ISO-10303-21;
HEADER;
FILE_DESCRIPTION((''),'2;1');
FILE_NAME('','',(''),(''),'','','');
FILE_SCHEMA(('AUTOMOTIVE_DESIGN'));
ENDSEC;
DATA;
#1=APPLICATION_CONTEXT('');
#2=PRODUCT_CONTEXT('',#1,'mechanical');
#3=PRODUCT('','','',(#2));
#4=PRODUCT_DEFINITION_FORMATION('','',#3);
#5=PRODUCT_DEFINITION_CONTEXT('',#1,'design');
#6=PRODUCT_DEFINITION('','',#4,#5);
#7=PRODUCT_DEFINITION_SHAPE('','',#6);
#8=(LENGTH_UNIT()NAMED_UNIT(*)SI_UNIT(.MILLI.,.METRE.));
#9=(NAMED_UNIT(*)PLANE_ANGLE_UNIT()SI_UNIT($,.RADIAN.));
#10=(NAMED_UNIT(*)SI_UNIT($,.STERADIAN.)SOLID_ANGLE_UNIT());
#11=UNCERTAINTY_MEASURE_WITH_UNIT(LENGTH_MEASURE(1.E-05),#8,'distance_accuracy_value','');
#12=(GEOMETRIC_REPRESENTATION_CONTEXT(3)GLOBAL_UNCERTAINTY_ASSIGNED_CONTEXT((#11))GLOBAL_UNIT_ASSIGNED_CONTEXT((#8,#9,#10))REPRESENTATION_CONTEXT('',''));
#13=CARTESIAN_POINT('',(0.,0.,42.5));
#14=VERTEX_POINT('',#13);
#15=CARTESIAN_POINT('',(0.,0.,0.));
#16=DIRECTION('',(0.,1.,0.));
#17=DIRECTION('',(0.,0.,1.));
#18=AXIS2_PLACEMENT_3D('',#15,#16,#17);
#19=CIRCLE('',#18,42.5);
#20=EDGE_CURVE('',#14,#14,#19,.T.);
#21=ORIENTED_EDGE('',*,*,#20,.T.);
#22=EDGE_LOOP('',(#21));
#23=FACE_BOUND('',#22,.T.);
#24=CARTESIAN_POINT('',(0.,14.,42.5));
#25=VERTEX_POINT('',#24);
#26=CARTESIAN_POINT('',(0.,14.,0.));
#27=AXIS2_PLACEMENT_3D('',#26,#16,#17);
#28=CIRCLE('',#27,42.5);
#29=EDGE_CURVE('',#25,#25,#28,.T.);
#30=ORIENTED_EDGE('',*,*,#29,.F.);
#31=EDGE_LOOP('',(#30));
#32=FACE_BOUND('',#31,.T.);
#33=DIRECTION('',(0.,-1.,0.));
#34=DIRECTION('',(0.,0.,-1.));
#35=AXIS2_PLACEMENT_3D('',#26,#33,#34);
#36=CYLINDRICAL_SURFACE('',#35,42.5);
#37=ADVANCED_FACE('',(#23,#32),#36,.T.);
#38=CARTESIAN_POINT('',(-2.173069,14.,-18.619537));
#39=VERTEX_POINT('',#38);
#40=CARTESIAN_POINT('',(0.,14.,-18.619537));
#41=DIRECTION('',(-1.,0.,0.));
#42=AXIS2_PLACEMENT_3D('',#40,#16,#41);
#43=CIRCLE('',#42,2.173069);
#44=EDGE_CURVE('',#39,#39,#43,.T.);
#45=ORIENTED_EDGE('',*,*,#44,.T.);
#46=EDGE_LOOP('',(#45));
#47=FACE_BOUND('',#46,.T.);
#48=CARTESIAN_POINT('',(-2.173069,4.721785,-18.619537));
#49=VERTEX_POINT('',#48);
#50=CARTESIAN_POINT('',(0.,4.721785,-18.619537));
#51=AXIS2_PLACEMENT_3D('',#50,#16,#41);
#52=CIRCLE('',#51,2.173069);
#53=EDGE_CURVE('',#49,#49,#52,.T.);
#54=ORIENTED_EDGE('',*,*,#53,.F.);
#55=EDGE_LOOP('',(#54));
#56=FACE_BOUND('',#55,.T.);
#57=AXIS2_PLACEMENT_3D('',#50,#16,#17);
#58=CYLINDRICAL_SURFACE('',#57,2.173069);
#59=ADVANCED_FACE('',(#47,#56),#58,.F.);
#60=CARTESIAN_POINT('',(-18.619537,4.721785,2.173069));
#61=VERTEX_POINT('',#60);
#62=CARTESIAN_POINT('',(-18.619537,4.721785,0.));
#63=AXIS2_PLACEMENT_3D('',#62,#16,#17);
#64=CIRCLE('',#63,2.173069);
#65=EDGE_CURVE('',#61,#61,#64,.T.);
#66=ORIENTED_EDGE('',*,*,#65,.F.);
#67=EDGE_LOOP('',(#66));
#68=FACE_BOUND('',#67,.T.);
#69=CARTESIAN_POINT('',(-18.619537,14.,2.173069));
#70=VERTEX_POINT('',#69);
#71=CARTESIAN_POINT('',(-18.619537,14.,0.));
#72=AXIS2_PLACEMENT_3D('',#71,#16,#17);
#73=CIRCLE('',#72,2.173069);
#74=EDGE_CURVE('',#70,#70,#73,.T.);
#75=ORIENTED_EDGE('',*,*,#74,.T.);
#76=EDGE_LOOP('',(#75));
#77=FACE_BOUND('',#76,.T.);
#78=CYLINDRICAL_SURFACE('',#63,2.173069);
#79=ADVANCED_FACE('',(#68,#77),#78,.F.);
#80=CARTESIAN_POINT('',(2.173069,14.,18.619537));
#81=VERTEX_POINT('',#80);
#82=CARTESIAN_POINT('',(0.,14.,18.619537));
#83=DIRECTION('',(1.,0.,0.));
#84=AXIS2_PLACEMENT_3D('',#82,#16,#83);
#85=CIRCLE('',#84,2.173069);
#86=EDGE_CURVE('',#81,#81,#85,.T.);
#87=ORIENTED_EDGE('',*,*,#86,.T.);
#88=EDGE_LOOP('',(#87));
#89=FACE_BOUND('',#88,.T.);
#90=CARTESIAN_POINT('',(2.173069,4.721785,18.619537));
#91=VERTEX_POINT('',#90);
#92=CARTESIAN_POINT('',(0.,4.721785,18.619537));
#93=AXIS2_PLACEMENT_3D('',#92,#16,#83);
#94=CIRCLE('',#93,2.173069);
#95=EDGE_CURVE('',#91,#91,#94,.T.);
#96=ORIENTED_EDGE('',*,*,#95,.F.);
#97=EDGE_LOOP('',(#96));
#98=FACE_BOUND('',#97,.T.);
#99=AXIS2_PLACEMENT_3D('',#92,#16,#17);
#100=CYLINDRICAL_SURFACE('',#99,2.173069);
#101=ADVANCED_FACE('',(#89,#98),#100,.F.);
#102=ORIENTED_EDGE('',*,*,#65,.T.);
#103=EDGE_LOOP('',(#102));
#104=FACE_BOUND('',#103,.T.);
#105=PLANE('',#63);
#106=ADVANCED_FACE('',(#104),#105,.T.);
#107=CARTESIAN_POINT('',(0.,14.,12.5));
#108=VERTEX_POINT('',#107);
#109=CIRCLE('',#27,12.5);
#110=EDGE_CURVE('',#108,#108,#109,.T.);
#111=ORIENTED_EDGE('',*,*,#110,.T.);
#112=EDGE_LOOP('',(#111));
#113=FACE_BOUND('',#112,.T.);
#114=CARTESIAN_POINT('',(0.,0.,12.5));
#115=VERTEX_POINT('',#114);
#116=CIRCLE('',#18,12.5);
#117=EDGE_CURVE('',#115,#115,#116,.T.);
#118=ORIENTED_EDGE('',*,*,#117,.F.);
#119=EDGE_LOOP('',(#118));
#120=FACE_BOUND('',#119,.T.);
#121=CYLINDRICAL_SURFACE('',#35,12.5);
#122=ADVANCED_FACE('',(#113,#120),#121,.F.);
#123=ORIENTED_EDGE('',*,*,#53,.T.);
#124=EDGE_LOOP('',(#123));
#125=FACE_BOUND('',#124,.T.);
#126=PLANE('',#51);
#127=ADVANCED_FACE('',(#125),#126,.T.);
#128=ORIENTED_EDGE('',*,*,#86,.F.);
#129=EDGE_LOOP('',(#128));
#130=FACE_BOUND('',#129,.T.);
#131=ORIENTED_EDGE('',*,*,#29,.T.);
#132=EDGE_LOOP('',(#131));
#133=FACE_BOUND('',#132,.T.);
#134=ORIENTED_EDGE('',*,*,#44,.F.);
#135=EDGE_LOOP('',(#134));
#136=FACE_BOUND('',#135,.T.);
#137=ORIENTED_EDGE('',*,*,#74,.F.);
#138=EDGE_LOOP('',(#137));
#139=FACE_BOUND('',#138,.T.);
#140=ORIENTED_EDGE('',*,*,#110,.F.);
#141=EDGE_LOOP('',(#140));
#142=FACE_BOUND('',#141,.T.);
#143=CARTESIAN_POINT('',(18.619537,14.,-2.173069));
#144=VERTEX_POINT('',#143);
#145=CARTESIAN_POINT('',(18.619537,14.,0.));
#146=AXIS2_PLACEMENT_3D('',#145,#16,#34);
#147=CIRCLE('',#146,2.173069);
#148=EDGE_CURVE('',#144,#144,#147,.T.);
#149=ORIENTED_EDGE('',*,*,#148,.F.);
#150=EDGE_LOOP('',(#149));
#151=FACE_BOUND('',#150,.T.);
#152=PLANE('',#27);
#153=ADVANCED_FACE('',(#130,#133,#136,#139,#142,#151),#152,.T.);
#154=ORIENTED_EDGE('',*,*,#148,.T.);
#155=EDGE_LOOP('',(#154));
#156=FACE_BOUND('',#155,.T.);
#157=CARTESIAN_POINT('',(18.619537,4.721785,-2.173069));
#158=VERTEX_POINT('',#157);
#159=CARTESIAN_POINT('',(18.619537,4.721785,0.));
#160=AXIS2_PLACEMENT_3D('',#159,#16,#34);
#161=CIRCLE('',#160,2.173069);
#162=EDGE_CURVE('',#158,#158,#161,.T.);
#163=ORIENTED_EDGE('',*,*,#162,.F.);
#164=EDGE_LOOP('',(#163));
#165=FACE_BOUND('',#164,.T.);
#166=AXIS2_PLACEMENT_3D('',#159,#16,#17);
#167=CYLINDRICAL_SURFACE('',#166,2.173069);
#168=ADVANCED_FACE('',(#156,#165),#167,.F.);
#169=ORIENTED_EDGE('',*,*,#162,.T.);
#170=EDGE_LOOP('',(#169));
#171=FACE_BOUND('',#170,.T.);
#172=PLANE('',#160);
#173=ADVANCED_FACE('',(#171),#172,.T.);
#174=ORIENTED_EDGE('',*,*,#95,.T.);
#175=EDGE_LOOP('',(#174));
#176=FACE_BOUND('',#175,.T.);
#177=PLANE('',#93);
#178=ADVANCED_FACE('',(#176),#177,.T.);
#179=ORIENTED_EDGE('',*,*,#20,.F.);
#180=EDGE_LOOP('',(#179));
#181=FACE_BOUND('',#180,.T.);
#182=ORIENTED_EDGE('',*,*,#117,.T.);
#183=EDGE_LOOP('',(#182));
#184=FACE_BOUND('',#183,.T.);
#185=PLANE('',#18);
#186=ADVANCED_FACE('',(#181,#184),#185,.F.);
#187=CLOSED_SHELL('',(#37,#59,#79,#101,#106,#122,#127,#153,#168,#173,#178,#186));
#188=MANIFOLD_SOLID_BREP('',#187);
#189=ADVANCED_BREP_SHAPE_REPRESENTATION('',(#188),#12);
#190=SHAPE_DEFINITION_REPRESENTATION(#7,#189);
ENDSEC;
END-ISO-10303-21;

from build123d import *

# Parameters (mm, degrees)
SKETCH1_R           = 42.5
BOSS_EXTRUDE1_DEPTH = 14
SKETCH2_R           = 12.5
CUT_EXTRUDE1_DEPTH  = 62.713045622
SKETCH3_R           = 2.173069289
CUT_EXTRUDE2_DEPTH  = 9.278215114
CIRPATTERN1_COUNT   = 4


with BuildPart() as part:
    # Sketch1 → Boss-Extrude1 (new body)
    with BuildSketch(Plane(origin=(0, 0, 0), x_dir=(1, 0, 0), z_dir=(0, 1, 0))):
        Circle(SKETCH1_R)
    extrude(amount=BOSS_EXTRUDE1_DEPTH)

    # Sketch2 → Cut-Extrude1 (cut, through all)
    with BuildSketch(Plane(origin=(0, 0, 0), x_dir=(1, 0, 0), z_dir=(0, 1, 0))):
        Circle(SKETCH2_R)
    extrude(amount=CUT_EXTRUDE1_DEPTH, mode=Mode.SUBTRACT)

    # Sketch3 → Cut-Extrude2 (cut)
    with BuildSketch(Plane(origin=(0, 14, 0), x_dir=(1, 0, 0), z_dir=(0, 1, 0))):
        with Locations((-18.619536516, 0)):
            Circle(SKETCH3_R)
    cut_extrude2 = extrude(amount=-CUT_EXTRUDE2_DEPTH, mode=Mode.SUBTRACT)

    # CirPattern1: Cut-Extrude2 ×4 about axis
    cirpattern1_axis = Axis((0, 0, 0), (0, 1, 0))
    for i in range(1, CIRPATTERN1_COUNT):
        add(cut_extrude2.rotate(cirpattern1_axis, i * 360 / CIRPATTERN1_COUNT), mode=Mode.SUBTRACT)


solid = part.part
